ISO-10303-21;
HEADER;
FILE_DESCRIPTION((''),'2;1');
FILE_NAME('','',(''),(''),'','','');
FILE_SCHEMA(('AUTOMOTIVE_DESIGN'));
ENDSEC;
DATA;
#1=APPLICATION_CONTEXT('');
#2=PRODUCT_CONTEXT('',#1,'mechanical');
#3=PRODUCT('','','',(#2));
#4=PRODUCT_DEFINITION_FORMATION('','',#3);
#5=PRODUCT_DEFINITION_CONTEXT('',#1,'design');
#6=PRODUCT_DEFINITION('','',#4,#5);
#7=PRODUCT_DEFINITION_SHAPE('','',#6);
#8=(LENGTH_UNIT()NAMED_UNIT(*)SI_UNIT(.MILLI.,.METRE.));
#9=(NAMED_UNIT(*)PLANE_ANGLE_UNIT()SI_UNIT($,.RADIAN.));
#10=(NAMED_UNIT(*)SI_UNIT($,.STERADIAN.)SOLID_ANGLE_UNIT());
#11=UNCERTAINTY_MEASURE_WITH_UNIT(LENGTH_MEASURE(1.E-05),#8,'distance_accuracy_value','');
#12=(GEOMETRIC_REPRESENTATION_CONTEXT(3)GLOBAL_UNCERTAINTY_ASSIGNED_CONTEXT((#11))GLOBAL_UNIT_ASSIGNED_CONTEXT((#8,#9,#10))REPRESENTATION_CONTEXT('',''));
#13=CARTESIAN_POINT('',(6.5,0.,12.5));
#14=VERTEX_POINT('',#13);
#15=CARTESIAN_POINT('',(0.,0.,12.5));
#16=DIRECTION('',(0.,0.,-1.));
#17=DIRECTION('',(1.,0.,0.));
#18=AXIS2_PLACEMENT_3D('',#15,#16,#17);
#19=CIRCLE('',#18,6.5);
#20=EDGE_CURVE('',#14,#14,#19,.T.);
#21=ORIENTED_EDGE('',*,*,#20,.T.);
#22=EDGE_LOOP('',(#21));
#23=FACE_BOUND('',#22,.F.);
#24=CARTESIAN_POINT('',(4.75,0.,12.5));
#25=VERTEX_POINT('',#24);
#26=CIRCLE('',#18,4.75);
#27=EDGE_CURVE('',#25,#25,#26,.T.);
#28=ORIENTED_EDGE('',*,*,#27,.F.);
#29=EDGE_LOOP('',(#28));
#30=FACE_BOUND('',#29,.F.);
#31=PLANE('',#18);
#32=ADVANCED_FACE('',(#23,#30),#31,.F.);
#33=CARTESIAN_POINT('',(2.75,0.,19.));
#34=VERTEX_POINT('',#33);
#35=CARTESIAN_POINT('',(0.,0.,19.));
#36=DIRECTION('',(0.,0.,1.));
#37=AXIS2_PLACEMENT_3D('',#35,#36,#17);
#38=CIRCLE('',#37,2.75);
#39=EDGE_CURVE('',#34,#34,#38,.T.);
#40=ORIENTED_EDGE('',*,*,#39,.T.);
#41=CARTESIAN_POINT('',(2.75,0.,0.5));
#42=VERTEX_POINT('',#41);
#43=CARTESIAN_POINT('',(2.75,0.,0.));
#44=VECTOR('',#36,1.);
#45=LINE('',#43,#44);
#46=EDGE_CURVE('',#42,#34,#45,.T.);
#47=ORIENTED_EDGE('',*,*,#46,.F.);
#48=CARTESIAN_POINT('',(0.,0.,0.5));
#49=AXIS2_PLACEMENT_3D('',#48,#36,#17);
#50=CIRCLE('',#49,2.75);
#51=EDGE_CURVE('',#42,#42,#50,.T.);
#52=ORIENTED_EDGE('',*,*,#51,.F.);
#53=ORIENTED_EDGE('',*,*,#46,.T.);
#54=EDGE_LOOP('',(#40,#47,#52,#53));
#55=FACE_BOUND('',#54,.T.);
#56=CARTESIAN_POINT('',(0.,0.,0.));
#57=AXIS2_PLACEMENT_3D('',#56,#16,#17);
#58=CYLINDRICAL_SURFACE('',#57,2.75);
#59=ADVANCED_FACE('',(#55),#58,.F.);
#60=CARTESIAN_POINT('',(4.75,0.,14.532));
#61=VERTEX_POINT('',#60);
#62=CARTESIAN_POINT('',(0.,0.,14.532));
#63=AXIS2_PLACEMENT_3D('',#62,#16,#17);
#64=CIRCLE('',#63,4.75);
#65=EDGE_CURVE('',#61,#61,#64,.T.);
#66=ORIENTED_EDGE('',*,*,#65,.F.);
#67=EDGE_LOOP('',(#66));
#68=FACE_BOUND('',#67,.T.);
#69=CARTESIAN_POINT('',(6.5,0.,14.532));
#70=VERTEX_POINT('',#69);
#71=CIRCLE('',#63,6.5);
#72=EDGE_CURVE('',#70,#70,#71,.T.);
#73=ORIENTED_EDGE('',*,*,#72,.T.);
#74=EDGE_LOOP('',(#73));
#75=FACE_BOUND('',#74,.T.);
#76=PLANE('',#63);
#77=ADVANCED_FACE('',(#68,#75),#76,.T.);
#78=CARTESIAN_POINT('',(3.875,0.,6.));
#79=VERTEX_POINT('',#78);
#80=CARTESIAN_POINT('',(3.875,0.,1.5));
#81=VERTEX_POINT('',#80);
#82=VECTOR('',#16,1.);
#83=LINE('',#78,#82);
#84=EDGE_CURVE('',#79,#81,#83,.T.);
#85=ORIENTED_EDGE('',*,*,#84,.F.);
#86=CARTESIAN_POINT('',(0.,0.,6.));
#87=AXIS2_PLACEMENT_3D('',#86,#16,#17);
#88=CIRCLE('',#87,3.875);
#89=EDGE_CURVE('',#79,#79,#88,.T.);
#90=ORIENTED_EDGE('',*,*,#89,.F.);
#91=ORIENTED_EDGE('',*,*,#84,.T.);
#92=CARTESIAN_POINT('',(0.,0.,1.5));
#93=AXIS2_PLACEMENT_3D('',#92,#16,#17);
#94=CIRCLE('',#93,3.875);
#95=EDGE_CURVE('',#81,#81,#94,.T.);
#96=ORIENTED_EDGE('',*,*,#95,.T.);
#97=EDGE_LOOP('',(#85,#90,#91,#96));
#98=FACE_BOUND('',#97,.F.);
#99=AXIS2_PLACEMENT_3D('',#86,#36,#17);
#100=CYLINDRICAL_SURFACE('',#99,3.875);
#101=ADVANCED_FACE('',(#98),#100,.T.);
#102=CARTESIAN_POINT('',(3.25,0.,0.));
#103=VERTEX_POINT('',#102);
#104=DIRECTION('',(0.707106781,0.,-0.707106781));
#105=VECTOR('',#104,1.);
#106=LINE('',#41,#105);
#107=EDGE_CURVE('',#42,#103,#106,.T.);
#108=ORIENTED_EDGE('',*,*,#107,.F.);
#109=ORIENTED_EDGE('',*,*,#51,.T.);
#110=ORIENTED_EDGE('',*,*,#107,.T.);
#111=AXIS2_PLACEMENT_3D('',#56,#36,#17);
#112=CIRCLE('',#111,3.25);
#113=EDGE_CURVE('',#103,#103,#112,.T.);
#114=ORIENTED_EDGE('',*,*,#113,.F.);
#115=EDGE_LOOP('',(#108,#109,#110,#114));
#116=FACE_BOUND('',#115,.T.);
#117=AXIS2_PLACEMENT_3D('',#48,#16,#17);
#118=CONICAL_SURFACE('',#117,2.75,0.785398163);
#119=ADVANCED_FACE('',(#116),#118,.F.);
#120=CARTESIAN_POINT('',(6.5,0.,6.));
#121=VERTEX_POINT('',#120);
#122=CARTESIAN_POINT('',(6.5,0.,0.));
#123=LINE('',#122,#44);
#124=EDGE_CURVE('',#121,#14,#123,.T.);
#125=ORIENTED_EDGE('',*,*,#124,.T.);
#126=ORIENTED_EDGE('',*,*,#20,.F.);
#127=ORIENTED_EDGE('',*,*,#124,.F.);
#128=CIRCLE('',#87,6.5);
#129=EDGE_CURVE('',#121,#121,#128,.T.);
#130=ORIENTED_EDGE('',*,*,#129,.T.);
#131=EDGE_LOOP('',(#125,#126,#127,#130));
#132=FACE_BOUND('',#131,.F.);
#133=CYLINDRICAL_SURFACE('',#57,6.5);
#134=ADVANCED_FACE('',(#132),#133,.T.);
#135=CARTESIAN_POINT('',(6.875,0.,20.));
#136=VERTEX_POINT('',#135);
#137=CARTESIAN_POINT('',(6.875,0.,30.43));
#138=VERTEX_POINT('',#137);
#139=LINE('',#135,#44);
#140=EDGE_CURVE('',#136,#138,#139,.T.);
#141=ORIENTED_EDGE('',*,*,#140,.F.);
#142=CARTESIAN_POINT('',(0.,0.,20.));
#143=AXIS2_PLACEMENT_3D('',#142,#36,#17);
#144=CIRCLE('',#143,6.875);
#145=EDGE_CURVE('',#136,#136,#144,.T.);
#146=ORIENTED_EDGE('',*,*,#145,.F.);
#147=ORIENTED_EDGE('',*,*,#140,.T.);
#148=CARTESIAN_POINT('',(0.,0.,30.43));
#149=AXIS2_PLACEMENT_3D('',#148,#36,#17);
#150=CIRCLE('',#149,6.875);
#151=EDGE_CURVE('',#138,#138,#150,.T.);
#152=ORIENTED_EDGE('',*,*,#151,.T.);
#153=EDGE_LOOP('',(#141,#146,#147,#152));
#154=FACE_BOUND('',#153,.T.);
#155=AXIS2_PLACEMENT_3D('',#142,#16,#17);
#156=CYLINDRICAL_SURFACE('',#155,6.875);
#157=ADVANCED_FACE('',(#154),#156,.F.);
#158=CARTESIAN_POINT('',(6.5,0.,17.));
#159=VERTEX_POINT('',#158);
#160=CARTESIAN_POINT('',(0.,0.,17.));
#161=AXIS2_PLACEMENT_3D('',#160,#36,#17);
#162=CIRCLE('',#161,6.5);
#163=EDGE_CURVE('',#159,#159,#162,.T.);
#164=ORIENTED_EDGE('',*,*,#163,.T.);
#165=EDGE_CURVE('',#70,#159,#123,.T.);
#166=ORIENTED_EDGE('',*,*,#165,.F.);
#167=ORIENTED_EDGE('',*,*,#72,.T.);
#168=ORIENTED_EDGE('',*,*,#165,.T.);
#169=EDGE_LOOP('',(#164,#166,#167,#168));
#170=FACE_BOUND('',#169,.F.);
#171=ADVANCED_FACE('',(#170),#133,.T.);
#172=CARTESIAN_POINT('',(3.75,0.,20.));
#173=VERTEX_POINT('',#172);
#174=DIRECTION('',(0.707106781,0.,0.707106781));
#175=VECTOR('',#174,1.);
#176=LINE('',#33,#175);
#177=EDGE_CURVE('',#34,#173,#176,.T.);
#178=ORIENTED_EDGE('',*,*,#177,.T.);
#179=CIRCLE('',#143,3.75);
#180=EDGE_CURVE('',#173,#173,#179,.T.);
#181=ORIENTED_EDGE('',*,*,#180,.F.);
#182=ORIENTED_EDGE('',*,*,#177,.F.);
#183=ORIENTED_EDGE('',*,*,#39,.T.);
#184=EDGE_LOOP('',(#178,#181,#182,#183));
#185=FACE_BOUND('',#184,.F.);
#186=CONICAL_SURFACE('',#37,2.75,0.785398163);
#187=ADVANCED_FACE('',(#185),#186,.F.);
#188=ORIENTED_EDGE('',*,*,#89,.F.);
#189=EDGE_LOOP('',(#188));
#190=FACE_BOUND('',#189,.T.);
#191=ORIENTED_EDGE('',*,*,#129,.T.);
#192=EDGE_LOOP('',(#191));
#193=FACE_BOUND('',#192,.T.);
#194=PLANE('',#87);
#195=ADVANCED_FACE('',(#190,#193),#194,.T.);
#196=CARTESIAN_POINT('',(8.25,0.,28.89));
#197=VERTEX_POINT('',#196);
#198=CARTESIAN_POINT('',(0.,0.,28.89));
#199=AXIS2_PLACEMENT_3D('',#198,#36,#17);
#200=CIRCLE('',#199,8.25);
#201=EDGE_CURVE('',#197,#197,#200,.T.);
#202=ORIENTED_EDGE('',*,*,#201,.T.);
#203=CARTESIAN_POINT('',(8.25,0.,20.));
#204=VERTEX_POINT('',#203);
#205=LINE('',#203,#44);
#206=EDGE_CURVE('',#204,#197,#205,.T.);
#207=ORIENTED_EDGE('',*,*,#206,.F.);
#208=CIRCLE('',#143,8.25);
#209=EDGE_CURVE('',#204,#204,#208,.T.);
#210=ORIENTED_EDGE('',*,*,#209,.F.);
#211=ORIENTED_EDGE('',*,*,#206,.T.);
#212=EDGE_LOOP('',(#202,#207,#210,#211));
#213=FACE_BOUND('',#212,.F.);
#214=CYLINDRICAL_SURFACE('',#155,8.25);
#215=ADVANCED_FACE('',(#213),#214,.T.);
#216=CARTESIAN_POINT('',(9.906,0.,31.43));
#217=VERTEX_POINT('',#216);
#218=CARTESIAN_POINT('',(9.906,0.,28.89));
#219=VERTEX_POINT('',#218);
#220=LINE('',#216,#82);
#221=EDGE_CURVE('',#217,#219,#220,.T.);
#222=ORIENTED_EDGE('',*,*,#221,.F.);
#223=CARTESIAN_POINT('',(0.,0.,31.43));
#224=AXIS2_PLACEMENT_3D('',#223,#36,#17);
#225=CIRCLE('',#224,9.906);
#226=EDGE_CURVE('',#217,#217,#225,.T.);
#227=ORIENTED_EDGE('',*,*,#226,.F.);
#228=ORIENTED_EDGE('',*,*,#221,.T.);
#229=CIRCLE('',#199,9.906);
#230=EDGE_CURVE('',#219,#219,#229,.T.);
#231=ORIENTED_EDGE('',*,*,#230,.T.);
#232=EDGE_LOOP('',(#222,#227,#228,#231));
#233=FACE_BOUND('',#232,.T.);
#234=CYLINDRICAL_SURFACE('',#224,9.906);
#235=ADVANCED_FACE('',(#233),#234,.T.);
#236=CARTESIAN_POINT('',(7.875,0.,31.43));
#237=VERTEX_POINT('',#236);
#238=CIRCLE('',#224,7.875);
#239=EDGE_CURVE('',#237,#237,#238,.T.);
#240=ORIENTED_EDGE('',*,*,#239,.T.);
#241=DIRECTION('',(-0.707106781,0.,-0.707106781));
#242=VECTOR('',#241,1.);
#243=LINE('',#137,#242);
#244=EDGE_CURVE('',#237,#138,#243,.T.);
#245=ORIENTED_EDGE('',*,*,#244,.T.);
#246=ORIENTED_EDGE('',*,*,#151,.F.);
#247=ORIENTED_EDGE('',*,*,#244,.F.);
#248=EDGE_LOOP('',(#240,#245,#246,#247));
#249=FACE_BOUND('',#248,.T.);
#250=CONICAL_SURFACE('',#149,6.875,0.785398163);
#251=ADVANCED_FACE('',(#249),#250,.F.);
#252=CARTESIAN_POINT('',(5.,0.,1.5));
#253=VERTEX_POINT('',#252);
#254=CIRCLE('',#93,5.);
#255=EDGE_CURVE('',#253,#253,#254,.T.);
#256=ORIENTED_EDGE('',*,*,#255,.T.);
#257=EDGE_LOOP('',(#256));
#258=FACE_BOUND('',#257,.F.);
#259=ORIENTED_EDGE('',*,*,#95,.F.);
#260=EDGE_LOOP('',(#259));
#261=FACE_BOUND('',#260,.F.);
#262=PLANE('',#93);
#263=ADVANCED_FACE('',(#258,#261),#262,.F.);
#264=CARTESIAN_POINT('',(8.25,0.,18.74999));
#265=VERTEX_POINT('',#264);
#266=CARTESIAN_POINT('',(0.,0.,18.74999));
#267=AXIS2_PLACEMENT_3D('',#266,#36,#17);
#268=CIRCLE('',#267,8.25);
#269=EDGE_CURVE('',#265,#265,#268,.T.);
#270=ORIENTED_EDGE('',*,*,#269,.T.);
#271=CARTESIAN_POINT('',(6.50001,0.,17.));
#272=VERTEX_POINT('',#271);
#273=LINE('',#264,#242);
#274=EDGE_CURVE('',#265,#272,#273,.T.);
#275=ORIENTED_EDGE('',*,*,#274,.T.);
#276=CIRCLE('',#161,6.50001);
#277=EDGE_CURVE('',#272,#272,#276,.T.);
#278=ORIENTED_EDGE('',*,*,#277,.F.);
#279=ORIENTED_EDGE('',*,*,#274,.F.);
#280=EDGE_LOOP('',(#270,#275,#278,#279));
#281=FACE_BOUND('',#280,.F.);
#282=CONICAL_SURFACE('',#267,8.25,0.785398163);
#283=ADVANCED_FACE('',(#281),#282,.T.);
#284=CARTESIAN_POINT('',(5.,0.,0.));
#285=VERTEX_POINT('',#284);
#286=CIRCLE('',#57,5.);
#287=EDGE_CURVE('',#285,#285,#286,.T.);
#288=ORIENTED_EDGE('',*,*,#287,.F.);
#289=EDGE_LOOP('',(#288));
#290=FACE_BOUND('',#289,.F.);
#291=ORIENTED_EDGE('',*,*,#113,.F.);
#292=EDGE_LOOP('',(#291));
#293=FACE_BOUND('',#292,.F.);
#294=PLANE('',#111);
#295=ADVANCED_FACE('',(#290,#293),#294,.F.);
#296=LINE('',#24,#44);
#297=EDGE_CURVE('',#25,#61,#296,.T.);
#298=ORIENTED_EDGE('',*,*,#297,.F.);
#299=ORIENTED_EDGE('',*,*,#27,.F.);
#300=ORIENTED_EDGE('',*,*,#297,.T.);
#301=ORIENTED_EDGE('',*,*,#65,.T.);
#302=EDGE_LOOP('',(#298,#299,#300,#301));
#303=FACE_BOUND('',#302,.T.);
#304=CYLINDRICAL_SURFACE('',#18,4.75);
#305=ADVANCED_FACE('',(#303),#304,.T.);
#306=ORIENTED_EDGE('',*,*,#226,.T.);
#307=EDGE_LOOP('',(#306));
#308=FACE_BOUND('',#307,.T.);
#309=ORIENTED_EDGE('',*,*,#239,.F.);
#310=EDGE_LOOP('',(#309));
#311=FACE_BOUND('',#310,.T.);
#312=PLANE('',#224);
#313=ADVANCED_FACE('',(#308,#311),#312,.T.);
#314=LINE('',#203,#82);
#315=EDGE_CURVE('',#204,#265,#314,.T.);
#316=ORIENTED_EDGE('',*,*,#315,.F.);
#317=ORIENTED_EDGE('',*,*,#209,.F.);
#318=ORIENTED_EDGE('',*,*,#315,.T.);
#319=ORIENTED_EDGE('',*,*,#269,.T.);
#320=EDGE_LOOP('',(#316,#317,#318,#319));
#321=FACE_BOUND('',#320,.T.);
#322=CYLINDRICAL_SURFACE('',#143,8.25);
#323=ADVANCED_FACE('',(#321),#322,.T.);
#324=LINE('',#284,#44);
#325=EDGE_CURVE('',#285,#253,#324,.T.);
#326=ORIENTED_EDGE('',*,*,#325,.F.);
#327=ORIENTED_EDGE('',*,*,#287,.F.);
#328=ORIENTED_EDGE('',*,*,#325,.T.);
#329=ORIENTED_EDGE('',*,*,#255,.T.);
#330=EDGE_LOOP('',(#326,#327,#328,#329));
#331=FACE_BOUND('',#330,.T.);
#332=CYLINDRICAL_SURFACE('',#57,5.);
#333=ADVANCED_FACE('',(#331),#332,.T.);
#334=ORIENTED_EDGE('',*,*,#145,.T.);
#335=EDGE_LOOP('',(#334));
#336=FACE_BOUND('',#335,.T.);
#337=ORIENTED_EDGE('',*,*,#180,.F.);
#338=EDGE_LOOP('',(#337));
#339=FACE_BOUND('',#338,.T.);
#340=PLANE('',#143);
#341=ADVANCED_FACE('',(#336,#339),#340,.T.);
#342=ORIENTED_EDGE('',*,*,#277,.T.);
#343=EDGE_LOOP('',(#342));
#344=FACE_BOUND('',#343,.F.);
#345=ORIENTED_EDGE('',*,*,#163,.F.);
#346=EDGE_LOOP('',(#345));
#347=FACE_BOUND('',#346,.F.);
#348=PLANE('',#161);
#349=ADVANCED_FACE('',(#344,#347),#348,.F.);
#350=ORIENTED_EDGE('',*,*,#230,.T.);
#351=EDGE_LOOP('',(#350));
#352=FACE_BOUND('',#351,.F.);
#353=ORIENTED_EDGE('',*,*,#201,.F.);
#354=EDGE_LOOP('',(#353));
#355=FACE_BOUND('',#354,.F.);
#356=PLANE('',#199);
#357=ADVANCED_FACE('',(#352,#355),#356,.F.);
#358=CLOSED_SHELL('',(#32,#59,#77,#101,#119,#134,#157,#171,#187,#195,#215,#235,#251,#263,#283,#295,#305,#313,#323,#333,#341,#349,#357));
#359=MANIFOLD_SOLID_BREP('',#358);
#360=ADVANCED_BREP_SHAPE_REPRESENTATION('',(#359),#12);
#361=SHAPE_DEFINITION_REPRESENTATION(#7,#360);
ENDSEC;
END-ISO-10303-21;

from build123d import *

# Parameters (mm, degrees)
F0_R      = 6.5
F0_R_2    = 2.75
F1_DEPTH  = 20
F2_R      = 6.5
F2_R_2    = 5
F3_DEPTH  = 6
F4_R      = 5
F4_R_2    = 3.875
F5_DEPTH  = 4.5
F7_R      = 6.5
F7_R_2    = 4.75
F8_DEPTH  = 2.032
F9_R      = 8.25
F9_R_2    = 6.5
F10_DEPTH = 3
F11_R     = 8.25
F11_R_2   = 6.875
F12_DEPTH = 11.43
F13_R     = 9.906
F13_R_2   = 8.25
F14_DEPTH = 2.54
F15_SIZE  = 1.74999
F16_SIZE  = 1
F17_SIZE  = 0.5
F18_SIZE  = 1


# Not quite as in the source:
# - a fillet or chamfer is up to 0.001 mm smaller than in the source, because OpenCascade refuses the exact size


with BuildPart() as f1:
    # F0 (on Top) → F1 (new body)
    with BuildSketch(Plane.XY):
        Circle(F0_R)
        Circle(F0_R_2, mode=Mode.SUBTRACT)
    extrude(amount=F1_DEPTH)

    # F2 (on face) → F3 (cut)
    with BuildSketch(Plane(origin=(0, 0, 0), x_dir=(1, 0, 0), z_dir=(0, 0, -1))):
        Circle(F2_R)
        Circle(F2_R_2, mode=Mode.SUBTRACT)
    extrude(amount=-F3_DEPTH, mode=Mode.SUBTRACT)

    # F4 (on face) → F5 (cut)
    with BuildSketch(Plane(origin=(0, 0, 6), x_dir=(1, 0, 0), z_dir=(0, 0, -1))):
        Circle(F4_R)
        Circle(F4_R_2, mode=Mode.SUBTRACT)
    extrude(amount=F5_DEPTH, mode=Mode.SUBTRACT)

    # F7 (on offset) → F8 (cut)
    with BuildSketch(Plane(origin=(0, 0, 12.5), x_dir=(1, 0, 0), z_dir=(0, 0, -1))):
        Circle(F7_R)
        Circle(F7_R_2, mode=Mode.SUBTRACT)
    extrude(amount=-F8_DEPTH, mode=Mode.SUBTRACT)

    # F9 (on face) → F10 (join)
    with BuildSketch(Plane.XY.offset(20)):
        Circle(F9_R)
        Circle(F9_R_2, mode=Mode.SUBTRACT)
    extrude(amount=-F10_DEPTH)

    # F11 (on face) → F12 (join)
    with BuildSketch(Plane.XY.offset(20)):
        Circle(F11_R)
        Circle(F11_R_2, mode=Mode.SUBTRACT)
    extrude(amount=F12_DEPTH)

    # F13 (on face) → F14 (join)
    with BuildSketch(Plane.XY.offset(31.43)):
        Circle(F13_R)
        Circle(F13_R_2, mode=Mode.SUBTRACT)
    extrude(amount=-F14_DEPTH)

    # F15 (size 1.75 in the source; OpenCascade refuses exactly that, so slightly less here)
    f15_edges = [f1.edges().sort_by_distance(p)[0] for p in [
        (-8.25, 0, 17),
    ]]
    chamfer(f15_edges, length=F15_SIZE)

    # F16
    f16_edges = [f1.edges().sort_by_distance(p)[0] for p in [
        (-6.875, 0, 31.43),
    ]]
    chamfer(f16_edges, length=F16_SIZE)

    # F17
    f17_edges = [f1.edges().sort_by_distance(p)[0] for p in [
        (-2.75, 0, 0),
    ]]
    chamfer(f17_edges, length=F17_SIZE)

    # F18
    f18_edges = [f1.edges().sort_by_distance(p)[0] for p in [
        (-2.75, 0, 20),
    ]]
    chamfer(f18_edges, length=F18_SIZE)


solid = f1.part
